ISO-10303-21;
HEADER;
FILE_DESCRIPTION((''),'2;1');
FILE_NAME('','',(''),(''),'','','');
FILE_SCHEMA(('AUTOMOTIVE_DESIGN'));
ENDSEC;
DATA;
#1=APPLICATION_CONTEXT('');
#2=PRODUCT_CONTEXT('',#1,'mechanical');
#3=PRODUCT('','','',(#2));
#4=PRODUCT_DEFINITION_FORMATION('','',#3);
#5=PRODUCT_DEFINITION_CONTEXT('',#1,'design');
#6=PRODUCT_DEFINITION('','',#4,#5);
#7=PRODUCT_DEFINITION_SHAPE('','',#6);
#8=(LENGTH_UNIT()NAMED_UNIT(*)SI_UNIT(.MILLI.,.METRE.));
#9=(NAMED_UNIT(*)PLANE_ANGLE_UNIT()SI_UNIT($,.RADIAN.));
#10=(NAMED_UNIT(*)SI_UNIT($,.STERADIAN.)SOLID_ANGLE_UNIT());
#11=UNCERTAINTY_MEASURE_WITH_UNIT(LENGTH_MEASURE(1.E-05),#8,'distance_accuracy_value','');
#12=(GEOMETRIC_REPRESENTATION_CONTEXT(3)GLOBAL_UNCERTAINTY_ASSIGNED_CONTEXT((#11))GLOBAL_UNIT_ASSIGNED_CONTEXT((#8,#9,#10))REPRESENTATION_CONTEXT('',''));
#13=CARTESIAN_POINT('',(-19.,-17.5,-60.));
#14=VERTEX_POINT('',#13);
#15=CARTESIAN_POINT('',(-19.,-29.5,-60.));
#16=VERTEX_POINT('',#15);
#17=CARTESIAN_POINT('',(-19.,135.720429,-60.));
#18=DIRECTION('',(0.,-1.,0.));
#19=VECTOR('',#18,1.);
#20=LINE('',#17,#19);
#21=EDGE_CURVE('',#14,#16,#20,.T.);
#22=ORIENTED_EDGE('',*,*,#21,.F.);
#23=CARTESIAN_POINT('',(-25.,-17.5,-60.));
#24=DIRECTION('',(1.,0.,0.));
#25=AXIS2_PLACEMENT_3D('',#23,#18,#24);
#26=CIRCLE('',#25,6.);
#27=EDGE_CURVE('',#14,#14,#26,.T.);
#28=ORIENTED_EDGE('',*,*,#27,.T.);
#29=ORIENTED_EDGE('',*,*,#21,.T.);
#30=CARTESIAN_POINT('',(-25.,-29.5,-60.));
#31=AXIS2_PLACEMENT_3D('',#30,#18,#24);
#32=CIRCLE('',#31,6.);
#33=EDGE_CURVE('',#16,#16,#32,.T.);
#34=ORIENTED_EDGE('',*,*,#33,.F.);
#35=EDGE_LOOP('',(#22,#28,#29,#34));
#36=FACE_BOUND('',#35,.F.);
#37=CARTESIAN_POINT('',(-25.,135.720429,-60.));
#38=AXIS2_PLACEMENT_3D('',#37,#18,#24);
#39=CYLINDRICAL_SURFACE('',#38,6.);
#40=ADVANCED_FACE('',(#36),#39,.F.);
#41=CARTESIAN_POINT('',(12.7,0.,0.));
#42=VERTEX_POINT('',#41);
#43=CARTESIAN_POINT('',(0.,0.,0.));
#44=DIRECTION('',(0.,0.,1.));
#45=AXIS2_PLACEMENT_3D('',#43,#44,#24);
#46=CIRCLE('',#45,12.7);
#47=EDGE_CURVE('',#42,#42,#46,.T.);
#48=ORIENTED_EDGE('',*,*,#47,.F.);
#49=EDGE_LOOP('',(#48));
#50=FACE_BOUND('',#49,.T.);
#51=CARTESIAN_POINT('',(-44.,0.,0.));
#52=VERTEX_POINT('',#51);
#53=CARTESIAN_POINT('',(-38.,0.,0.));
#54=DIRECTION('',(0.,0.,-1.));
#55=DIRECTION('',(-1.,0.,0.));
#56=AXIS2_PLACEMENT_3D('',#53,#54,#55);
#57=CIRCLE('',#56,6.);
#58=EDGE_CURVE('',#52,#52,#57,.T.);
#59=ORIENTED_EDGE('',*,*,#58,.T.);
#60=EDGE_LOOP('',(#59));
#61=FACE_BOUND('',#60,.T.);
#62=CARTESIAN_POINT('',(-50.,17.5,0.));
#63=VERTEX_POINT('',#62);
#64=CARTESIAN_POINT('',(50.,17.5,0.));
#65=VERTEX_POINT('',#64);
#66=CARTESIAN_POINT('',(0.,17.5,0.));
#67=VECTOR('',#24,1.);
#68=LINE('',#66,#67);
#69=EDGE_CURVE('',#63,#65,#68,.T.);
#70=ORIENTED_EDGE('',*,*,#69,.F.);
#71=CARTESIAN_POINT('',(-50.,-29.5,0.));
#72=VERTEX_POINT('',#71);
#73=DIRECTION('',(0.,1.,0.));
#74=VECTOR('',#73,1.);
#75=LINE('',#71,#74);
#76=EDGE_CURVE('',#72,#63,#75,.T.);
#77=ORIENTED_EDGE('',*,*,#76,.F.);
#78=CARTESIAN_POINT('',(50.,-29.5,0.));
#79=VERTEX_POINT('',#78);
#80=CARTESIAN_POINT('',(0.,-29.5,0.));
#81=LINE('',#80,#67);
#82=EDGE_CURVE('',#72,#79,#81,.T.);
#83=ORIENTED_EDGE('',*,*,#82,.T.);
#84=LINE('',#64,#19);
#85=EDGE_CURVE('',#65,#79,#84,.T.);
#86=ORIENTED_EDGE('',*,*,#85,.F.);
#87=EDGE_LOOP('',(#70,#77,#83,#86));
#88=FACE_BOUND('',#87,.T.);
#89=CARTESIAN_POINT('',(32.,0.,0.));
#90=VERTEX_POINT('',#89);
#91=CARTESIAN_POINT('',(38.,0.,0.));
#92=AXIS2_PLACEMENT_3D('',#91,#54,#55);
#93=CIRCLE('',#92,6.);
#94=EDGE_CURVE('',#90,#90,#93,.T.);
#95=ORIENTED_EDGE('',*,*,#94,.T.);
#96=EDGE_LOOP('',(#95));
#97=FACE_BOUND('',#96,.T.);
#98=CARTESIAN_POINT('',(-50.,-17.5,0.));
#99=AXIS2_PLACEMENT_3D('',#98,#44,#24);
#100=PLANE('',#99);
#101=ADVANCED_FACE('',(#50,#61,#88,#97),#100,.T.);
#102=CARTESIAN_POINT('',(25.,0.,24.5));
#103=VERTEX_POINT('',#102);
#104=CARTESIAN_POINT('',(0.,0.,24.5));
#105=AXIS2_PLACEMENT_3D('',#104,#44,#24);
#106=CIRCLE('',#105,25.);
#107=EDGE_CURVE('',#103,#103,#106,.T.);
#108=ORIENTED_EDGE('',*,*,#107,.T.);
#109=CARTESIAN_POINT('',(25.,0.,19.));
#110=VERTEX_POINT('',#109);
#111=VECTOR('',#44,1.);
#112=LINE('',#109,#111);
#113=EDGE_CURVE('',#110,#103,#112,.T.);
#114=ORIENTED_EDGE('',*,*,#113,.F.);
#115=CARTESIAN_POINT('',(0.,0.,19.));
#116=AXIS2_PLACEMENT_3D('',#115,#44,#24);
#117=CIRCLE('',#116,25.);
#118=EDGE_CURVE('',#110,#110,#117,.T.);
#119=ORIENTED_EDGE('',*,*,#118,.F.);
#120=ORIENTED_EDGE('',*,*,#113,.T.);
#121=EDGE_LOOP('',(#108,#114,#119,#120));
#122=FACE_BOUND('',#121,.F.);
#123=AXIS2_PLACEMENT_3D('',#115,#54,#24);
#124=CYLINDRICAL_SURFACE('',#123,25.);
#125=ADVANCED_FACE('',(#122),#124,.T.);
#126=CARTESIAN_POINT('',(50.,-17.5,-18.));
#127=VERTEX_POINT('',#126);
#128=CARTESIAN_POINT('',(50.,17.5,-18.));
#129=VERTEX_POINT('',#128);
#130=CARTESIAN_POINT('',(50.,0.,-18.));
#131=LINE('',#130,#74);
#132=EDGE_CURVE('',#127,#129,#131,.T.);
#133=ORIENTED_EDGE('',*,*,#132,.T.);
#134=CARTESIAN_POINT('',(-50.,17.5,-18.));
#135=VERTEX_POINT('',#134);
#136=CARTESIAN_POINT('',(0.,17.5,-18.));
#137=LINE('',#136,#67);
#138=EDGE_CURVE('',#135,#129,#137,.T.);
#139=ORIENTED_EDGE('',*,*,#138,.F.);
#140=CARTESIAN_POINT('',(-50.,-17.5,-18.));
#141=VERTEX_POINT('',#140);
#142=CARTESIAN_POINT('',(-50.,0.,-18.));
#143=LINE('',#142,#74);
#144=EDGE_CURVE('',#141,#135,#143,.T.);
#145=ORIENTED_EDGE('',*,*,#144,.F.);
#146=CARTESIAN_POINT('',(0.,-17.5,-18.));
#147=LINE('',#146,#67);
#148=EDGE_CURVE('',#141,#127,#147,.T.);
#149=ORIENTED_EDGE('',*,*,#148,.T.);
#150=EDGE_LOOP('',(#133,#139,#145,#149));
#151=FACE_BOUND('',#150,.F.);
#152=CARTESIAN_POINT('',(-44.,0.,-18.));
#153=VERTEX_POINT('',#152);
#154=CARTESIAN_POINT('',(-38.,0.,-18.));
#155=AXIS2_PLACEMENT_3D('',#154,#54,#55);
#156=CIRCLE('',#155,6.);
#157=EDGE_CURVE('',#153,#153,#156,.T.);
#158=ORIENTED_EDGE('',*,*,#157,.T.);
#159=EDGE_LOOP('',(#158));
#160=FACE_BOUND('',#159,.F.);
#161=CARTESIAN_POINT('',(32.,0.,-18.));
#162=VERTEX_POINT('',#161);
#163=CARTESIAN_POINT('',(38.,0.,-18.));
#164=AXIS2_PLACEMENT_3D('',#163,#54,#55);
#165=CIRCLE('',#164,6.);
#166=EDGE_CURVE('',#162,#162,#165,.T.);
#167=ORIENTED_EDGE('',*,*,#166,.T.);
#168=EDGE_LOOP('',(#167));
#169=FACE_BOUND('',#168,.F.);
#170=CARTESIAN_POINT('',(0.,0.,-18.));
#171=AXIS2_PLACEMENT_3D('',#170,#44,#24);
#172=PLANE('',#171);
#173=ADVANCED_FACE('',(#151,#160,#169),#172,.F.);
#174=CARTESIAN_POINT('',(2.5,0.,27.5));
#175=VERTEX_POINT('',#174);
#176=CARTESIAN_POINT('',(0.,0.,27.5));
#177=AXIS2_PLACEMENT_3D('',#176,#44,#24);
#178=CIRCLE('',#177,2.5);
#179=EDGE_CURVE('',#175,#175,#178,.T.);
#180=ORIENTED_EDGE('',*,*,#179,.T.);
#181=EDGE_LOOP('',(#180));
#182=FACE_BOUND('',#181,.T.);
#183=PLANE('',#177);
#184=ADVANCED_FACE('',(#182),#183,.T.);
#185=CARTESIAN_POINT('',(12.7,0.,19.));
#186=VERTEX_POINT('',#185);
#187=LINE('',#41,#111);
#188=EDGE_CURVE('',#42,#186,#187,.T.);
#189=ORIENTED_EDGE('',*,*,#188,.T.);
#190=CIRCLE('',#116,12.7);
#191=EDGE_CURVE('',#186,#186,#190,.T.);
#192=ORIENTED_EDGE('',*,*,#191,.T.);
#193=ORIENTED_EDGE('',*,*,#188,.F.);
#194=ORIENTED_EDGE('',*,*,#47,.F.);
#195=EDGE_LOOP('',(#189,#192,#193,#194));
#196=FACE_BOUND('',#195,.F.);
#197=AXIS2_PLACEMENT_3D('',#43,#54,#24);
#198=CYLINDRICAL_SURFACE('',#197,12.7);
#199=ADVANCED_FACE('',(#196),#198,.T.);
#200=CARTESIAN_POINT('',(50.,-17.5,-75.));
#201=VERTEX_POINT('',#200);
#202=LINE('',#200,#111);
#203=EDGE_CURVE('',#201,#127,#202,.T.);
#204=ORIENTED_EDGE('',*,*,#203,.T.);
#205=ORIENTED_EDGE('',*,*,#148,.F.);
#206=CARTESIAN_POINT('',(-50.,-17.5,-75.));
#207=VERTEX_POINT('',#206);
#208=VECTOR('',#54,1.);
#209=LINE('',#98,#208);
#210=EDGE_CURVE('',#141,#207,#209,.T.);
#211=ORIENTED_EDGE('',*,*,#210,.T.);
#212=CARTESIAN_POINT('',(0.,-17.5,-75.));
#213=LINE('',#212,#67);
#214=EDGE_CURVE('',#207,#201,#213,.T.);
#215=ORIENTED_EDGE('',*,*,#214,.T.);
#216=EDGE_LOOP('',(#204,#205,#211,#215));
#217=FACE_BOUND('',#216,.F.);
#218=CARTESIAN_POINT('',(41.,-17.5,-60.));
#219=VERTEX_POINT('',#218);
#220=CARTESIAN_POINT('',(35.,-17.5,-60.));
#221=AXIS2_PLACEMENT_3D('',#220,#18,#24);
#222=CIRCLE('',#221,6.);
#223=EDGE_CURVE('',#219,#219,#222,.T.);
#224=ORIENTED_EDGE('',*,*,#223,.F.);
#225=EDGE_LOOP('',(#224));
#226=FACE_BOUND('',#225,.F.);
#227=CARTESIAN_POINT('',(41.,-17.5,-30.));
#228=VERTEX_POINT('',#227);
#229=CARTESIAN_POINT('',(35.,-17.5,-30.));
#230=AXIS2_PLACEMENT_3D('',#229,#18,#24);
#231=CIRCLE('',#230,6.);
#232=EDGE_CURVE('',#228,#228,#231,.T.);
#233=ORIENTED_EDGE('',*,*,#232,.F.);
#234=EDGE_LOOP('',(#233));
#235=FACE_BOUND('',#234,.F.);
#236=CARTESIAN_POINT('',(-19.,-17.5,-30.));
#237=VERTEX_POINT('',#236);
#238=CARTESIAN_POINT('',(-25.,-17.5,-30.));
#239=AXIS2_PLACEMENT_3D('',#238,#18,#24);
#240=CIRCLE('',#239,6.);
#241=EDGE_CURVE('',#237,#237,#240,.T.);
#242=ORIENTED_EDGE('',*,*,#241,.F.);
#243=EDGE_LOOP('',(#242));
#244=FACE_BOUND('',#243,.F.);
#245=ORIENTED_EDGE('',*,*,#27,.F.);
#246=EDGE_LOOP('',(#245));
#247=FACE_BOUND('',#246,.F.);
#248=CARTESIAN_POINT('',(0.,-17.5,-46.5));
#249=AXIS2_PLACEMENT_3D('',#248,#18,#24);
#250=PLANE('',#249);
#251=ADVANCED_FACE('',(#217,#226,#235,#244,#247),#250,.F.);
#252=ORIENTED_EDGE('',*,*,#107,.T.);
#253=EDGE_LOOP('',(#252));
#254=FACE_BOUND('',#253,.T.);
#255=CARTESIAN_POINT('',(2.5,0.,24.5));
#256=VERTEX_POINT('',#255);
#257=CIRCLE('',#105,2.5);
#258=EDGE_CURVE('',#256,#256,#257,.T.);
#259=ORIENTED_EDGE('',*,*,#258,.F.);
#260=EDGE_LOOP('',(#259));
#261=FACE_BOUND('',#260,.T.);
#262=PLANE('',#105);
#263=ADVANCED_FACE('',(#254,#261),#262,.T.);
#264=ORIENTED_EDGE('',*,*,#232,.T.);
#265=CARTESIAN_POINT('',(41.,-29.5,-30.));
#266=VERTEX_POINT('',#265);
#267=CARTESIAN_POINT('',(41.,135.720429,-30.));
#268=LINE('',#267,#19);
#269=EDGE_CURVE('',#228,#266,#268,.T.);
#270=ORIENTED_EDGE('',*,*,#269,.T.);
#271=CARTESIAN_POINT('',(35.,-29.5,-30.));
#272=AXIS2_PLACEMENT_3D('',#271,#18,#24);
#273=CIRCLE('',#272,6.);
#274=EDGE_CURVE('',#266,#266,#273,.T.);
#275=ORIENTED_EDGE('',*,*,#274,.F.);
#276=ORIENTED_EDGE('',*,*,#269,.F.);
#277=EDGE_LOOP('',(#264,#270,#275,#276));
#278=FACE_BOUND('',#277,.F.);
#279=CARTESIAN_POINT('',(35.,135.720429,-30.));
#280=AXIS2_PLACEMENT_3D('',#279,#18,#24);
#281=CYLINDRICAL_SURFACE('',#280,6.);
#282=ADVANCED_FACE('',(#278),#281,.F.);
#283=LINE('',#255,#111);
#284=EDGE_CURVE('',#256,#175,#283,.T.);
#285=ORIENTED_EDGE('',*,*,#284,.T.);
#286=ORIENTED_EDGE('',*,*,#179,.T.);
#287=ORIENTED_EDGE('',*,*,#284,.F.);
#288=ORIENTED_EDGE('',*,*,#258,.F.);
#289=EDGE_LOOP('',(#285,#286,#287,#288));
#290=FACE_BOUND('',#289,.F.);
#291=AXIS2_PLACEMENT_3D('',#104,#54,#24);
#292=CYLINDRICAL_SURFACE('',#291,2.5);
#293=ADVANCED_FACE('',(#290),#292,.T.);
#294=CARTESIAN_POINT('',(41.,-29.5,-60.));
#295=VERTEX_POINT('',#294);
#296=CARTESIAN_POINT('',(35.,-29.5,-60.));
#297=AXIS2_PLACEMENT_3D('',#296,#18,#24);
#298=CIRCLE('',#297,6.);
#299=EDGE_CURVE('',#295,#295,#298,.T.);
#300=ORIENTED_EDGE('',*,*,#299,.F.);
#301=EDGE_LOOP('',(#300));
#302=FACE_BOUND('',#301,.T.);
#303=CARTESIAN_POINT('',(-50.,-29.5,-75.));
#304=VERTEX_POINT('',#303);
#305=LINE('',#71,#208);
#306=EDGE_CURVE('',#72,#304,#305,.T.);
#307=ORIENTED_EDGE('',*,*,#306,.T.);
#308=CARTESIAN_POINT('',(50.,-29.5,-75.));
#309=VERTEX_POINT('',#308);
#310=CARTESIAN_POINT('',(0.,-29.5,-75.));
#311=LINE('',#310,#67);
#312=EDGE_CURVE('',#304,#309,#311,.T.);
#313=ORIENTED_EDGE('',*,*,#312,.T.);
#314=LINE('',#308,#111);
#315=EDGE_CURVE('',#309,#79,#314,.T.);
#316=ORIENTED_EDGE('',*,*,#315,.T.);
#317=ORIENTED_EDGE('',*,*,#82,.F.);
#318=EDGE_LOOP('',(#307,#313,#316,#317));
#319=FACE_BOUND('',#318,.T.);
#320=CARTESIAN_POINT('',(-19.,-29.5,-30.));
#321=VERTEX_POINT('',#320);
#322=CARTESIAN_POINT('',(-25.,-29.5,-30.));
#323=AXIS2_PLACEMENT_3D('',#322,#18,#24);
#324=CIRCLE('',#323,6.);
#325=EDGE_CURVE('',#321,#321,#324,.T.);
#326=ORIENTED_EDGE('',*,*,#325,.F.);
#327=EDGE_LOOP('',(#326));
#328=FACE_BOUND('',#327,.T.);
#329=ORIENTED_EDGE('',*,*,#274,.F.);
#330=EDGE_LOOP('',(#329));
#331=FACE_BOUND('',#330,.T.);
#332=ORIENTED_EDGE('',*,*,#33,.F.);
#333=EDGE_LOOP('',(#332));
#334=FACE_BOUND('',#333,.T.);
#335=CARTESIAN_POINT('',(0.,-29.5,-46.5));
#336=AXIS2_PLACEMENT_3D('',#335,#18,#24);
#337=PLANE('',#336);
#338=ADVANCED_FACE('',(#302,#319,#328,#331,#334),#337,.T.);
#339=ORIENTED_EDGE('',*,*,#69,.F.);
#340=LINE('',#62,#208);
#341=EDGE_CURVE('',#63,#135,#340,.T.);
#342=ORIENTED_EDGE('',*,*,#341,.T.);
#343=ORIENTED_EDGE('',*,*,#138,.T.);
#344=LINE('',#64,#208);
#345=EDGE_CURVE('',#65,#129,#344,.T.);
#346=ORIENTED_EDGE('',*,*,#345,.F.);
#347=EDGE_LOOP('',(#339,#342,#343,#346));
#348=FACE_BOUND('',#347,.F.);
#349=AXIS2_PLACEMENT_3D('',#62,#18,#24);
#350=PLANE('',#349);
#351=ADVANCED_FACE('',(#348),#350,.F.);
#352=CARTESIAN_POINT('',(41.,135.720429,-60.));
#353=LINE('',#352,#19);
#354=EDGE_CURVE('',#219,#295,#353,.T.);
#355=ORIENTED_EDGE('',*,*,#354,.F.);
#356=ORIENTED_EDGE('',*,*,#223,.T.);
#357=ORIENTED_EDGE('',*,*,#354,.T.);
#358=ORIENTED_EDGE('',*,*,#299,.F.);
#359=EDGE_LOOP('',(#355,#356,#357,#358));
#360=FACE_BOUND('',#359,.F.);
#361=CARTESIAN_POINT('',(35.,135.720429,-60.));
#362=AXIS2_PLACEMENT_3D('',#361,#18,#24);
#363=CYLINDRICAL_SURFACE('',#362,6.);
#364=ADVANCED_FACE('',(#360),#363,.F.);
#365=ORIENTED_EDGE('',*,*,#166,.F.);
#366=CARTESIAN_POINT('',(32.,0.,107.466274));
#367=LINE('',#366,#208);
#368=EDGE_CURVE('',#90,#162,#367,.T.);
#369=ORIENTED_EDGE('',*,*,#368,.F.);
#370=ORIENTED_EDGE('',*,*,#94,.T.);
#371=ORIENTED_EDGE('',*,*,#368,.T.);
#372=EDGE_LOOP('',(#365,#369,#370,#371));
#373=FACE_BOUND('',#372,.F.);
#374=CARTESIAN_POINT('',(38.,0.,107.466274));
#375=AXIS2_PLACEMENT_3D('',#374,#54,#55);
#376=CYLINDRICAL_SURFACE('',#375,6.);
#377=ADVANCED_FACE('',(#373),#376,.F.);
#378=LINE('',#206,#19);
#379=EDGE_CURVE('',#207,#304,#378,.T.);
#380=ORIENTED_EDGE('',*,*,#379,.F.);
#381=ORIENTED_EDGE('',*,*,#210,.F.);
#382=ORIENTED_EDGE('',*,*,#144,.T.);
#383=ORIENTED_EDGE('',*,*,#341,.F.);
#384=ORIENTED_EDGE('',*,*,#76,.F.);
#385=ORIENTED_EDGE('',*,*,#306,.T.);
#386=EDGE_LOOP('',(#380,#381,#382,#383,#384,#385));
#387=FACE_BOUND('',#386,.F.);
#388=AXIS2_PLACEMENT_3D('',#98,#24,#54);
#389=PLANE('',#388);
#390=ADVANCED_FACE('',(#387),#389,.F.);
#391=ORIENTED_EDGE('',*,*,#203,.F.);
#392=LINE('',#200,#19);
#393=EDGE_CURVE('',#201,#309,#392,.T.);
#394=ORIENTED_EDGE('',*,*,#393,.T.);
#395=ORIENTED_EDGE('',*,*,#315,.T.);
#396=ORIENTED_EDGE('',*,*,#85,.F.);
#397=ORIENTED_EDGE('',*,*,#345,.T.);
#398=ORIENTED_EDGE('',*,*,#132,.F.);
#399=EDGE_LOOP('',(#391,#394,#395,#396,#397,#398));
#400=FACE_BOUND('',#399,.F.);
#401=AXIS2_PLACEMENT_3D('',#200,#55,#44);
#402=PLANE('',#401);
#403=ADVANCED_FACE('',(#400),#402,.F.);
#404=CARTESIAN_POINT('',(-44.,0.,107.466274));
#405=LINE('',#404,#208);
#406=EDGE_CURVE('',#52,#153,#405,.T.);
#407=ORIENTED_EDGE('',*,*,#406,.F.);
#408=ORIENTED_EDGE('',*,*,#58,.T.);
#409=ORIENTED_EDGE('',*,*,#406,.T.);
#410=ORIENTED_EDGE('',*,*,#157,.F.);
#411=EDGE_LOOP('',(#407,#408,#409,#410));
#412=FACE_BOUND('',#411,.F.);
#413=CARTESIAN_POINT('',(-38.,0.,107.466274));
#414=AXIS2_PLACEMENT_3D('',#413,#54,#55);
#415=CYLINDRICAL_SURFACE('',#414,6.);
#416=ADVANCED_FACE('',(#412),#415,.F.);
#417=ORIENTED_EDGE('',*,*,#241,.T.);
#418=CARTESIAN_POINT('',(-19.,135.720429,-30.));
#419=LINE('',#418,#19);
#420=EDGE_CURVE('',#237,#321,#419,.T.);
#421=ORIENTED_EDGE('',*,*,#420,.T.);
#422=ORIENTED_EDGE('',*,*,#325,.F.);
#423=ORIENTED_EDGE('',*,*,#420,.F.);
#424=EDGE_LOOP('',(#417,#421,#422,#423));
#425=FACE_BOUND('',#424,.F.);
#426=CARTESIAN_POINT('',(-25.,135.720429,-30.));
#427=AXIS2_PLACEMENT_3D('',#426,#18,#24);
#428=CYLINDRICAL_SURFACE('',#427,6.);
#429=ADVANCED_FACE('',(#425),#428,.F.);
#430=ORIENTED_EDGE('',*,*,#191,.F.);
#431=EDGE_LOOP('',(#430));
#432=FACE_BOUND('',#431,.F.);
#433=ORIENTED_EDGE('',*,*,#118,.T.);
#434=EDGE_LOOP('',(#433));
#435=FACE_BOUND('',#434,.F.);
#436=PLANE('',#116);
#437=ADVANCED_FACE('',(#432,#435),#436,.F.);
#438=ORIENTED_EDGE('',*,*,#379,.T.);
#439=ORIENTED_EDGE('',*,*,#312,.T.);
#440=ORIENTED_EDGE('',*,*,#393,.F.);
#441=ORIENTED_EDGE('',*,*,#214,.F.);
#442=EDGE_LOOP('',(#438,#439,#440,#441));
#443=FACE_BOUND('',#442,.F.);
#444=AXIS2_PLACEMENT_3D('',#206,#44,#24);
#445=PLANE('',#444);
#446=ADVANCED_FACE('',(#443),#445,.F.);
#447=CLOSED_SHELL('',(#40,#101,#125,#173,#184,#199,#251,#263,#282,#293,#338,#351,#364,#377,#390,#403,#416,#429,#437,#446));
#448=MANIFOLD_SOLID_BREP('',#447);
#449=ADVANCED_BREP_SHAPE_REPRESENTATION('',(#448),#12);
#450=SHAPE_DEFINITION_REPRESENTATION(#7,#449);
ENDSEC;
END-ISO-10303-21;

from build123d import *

# Parameters (mm, degrees)
F0_W      = 100
F0_H      = 35
F1_DEPTH  = 18
F3_D      = 12
F4_R      = 12.7
F5_DEPTH  = 19
F6_R      = 25
F6_R_2    = 12.7
F7_DEPTH  = 5.5
F8_R      = 2.5
F9_DEPTH  = 3
F10_W     = 100
F10_H     = 57
F10_H_2   = 18
F11_DEPTH = 12
F13_D     = 12


# Not quite as in the source:
# - a feature names something its author has since deleted; it is built from what else it names


with BuildPart() as f1:
    # F0 (on Top) → F1 (new body)
    with BuildSketch(Plane.XY):
        Rectangle(F0_W, F0_H)
    extrude(amount=-F1_DEPTH)

    # F3 (through all)
    with Locations(Plane.XY):
        with Locations((-38, 0), (38, 0)):
            Hole(F3_D / 2)

    # F4 (on face) → F5 (join)
    with BuildSketch(Plane.XY):
        Circle(F4_R)
    extrude(amount=F5_DEPTH)

    # F6 (on face) → F7 (join)
    with BuildSketch(Plane.XY.offset(19)):
        Circle(F6_R)
        Circle(F6_R_2, mode=Mode.SUBTRACT)
        Circle(F6_R_2)
    extrude(amount=F7_DEPTH)

    # F8 (on face) → F9 (join)
    with BuildSketch(Plane.XY.offset(24.5)):
        Circle(F8_R)
    extrude(amount=F9_DEPTH)

    # F10 (on face) → F11 (join)
    with BuildSketch(Plane.XZ.offset(17.5)):
        with Locations((0, -46.5)):
            Rectangle(F10_W, F10_H)
        with Locations((0, -9)):
            Rectangle(F10_W, F10_H_2)
    extrude(amount=F11_DEPTH)

    # F13 (through all)
    with Locations(Plane(origin=(0, -17.5, 0), x_dir=(-1, 0, 0), z_dir=(0, 1, 0))):
        with Locations((-35, -30), (-35, -60), (25, -30), (25, -60)):
            Hole(F13_D / 2)


solid = f1.part
